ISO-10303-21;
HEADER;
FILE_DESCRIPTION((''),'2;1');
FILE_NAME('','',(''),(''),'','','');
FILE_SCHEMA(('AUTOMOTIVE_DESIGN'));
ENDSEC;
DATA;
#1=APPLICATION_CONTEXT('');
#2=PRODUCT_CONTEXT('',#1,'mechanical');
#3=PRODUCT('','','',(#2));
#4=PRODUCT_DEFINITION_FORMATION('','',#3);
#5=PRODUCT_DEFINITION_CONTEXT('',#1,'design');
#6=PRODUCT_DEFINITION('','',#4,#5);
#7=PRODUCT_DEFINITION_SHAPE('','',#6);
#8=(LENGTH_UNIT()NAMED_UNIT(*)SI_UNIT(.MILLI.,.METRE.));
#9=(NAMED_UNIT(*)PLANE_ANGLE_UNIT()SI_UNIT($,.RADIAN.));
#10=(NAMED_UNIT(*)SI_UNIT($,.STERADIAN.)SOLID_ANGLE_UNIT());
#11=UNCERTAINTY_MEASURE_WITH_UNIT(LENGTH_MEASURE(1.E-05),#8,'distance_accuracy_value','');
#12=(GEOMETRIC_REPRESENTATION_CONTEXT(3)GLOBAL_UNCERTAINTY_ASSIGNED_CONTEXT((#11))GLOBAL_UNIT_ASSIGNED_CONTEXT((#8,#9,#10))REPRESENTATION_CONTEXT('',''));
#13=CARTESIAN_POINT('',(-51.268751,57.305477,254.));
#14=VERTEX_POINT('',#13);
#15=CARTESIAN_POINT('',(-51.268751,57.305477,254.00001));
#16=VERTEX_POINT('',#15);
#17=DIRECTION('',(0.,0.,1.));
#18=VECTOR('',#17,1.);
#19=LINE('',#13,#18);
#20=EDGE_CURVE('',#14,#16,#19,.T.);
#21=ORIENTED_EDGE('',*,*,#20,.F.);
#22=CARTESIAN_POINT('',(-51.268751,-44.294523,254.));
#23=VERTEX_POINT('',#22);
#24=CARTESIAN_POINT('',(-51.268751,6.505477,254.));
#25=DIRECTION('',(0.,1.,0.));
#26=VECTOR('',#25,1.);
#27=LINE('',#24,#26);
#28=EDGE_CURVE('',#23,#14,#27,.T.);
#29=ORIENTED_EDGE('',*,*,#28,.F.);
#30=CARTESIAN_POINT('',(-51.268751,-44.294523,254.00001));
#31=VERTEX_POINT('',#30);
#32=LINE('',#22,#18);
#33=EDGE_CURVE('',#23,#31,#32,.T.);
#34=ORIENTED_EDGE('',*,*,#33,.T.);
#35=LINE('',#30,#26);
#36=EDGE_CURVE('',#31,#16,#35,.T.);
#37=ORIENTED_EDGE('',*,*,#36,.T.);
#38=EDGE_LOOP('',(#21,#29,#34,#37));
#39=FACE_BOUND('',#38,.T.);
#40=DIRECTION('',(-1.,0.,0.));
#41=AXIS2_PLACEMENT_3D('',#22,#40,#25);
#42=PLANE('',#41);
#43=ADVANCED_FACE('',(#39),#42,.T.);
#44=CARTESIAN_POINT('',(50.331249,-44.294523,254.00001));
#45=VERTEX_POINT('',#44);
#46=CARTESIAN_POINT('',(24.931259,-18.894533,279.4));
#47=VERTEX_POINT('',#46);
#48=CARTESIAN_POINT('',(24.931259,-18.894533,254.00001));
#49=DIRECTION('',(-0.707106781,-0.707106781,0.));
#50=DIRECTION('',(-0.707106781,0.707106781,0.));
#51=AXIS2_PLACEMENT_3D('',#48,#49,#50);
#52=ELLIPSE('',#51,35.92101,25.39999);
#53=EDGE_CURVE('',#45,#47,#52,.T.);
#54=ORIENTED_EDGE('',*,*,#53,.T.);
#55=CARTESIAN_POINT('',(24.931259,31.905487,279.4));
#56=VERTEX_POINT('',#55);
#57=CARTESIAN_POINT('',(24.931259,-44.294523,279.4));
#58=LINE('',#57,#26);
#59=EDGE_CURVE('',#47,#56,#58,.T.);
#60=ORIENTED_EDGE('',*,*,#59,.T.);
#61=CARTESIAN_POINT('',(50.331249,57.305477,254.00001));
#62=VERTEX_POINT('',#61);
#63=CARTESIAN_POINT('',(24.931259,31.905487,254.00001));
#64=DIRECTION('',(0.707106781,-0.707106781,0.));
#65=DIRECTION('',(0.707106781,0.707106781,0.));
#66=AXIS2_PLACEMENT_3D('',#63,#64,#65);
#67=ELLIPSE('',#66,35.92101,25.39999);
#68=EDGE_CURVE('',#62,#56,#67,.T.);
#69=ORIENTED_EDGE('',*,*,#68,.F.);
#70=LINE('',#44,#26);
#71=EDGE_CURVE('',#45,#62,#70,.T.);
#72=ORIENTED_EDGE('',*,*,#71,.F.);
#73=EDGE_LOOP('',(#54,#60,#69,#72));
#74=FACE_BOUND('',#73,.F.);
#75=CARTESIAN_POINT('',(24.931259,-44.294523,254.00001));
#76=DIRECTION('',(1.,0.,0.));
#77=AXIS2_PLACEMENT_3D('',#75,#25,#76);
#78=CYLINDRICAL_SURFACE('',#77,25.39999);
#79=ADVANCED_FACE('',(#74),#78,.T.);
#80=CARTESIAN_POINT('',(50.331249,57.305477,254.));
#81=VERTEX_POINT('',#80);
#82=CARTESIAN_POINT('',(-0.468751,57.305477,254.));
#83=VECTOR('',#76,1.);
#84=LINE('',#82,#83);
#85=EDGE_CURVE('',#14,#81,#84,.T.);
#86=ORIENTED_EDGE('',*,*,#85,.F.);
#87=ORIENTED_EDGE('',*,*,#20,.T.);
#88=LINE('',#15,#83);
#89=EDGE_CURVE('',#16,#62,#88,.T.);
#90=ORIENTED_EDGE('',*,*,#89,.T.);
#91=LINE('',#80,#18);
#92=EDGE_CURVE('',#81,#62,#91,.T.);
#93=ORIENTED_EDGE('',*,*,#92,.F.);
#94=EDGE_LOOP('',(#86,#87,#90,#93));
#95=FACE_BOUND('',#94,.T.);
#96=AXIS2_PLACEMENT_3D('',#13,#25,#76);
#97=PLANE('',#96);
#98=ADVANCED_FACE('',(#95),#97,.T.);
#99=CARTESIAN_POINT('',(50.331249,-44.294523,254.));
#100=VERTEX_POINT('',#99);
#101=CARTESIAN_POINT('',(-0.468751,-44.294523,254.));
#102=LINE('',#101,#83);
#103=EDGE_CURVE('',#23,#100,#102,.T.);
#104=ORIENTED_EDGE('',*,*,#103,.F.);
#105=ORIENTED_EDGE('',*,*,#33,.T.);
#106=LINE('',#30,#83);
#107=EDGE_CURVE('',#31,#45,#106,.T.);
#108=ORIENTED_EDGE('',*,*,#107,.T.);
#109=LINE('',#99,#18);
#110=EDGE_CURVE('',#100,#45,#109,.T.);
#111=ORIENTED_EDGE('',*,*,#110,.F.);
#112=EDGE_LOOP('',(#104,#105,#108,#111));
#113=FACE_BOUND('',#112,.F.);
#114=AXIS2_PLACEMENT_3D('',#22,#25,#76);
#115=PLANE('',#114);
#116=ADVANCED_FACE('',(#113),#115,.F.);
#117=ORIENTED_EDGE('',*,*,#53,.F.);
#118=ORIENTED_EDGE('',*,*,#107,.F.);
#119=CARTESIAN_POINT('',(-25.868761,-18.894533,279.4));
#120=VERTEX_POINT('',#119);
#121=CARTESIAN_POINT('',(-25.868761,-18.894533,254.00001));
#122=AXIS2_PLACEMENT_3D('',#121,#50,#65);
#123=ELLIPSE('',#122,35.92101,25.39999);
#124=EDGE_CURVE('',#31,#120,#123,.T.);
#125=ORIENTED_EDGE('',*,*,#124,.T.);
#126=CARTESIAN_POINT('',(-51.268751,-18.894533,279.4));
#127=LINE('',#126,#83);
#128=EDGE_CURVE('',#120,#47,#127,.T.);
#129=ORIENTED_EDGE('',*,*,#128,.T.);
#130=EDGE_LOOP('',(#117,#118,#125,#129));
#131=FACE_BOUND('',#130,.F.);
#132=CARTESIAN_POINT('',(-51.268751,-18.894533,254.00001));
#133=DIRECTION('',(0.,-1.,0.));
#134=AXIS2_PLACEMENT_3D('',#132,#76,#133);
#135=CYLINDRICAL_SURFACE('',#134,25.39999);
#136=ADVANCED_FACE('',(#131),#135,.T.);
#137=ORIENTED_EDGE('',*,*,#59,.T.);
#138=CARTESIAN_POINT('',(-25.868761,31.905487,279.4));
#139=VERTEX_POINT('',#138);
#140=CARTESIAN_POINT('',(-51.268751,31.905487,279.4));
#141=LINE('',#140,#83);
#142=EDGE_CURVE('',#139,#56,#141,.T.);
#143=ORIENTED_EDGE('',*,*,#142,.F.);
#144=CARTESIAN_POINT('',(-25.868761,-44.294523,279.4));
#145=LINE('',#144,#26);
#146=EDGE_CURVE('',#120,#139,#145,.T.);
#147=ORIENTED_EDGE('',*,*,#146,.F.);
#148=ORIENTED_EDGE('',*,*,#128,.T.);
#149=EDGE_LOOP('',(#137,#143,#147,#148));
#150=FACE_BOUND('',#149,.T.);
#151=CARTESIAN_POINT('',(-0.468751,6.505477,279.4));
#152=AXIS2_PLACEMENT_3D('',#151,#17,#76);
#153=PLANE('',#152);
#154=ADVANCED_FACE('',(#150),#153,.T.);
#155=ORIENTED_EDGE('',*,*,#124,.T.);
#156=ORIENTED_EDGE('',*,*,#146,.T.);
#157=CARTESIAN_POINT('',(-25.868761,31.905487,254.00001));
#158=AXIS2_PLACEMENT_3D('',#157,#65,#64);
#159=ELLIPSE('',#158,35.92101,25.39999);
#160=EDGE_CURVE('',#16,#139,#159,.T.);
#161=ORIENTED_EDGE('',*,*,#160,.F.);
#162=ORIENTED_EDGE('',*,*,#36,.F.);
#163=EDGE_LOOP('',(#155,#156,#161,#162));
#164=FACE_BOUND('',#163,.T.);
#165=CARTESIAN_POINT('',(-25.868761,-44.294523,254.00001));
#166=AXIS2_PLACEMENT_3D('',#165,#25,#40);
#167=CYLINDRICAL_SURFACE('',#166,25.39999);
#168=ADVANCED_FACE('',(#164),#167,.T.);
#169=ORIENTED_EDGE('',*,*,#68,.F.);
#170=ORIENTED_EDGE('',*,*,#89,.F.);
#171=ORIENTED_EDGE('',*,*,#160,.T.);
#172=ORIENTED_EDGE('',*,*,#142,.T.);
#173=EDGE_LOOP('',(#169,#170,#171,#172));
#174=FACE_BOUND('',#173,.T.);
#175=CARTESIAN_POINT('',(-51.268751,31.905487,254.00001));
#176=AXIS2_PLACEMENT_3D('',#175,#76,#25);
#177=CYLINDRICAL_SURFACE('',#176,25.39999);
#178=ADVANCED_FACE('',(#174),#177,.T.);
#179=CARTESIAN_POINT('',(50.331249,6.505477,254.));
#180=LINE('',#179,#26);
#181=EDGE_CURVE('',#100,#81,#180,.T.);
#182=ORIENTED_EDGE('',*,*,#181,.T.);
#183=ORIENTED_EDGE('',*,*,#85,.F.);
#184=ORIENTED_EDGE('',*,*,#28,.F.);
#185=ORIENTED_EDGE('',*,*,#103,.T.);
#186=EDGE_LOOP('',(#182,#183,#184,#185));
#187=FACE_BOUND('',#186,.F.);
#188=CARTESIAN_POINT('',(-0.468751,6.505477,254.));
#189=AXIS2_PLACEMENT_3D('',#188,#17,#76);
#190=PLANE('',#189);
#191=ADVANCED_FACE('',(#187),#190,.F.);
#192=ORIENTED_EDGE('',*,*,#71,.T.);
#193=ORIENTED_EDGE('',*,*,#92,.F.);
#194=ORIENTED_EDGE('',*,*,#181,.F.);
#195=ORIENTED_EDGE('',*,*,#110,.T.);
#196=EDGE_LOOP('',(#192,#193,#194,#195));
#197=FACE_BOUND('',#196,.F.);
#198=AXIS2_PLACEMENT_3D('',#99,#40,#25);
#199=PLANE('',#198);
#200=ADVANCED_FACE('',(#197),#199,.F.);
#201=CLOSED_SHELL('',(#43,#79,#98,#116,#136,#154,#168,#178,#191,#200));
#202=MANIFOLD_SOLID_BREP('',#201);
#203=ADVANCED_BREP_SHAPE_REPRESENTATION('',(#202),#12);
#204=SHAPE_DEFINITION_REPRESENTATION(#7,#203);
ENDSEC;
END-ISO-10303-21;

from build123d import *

# Parameters (mm, degrees)
F3_W     = 50.7285948843
F3_H     = 69.9163675308
F6_W     = 101.6
F6_H     = 101.6
F7_DEPTH = 25.4
F8_R     = 25.39999


# Not quite as in the source:
# - a fillet or chamfer is up to 0.001 mm smaller than in the source, because OpenCascade refuses the exact size


with BuildPart() as f4:
    # F1 (on offset) → F4 section 0
    with BuildSketch(Plane.YZ.offset(127)):
        with BuildLine():
            add(Edge.make_bspline(
                [(-11.8536790833, -25.3428127617), (16.5973998136, -117.2622232897), (89.6947664905, -44.2741583201), (162.7921331674, 28.7139066495), (61.2436875936, 47.6452522079), (-40.3047579802, 66.5765977664), (-11.8536790833, -25.3428127617)],
                knots=[0, 0, 0, 2.0943951024, 2.0943951024, 4.1887902048, 4.1887902048, 6.2831853072, 6.2831853072, 6.2831853072], degree=2, weights=[1, 0.5, 1, 0.5, 1, 0.5, 1]))
        make_face()
    # F3 (on offset) → F4 section 1
    with BuildSketch(Plane.XY.offset(254)):
        with Locations((-8.5154855624, -1.6246475279)):
            Rectangle(F3_W, F3_H)
    loft()


with BuildPart() as f7:
    # F6 (on offset) → F7 (new body)
    with BuildSketch(Plane.XY.offset(254)):
        with Locations((-0.4687514156, 6.5054772415)):
            Rectangle(F6_W, F6_H)
    extrude(amount=F7_DEPTH)

    # F8 (radius 25.4 in the source; OpenCascade refuses exactly that, so slightly less here)
    f8_edges = [f7.edges().sort_by_distance(p)[0] for p in [
        (50.331249, 6.505477, 279.4),
        (-0.468751, 57.305477, 279.4),
        (-51.268751, 6.505477, 279.4),
        (-0.468751, -44.294523, 279.4),
    ]]
    fillet(f8_edges, radius=F8_R)


solid = f7.part
